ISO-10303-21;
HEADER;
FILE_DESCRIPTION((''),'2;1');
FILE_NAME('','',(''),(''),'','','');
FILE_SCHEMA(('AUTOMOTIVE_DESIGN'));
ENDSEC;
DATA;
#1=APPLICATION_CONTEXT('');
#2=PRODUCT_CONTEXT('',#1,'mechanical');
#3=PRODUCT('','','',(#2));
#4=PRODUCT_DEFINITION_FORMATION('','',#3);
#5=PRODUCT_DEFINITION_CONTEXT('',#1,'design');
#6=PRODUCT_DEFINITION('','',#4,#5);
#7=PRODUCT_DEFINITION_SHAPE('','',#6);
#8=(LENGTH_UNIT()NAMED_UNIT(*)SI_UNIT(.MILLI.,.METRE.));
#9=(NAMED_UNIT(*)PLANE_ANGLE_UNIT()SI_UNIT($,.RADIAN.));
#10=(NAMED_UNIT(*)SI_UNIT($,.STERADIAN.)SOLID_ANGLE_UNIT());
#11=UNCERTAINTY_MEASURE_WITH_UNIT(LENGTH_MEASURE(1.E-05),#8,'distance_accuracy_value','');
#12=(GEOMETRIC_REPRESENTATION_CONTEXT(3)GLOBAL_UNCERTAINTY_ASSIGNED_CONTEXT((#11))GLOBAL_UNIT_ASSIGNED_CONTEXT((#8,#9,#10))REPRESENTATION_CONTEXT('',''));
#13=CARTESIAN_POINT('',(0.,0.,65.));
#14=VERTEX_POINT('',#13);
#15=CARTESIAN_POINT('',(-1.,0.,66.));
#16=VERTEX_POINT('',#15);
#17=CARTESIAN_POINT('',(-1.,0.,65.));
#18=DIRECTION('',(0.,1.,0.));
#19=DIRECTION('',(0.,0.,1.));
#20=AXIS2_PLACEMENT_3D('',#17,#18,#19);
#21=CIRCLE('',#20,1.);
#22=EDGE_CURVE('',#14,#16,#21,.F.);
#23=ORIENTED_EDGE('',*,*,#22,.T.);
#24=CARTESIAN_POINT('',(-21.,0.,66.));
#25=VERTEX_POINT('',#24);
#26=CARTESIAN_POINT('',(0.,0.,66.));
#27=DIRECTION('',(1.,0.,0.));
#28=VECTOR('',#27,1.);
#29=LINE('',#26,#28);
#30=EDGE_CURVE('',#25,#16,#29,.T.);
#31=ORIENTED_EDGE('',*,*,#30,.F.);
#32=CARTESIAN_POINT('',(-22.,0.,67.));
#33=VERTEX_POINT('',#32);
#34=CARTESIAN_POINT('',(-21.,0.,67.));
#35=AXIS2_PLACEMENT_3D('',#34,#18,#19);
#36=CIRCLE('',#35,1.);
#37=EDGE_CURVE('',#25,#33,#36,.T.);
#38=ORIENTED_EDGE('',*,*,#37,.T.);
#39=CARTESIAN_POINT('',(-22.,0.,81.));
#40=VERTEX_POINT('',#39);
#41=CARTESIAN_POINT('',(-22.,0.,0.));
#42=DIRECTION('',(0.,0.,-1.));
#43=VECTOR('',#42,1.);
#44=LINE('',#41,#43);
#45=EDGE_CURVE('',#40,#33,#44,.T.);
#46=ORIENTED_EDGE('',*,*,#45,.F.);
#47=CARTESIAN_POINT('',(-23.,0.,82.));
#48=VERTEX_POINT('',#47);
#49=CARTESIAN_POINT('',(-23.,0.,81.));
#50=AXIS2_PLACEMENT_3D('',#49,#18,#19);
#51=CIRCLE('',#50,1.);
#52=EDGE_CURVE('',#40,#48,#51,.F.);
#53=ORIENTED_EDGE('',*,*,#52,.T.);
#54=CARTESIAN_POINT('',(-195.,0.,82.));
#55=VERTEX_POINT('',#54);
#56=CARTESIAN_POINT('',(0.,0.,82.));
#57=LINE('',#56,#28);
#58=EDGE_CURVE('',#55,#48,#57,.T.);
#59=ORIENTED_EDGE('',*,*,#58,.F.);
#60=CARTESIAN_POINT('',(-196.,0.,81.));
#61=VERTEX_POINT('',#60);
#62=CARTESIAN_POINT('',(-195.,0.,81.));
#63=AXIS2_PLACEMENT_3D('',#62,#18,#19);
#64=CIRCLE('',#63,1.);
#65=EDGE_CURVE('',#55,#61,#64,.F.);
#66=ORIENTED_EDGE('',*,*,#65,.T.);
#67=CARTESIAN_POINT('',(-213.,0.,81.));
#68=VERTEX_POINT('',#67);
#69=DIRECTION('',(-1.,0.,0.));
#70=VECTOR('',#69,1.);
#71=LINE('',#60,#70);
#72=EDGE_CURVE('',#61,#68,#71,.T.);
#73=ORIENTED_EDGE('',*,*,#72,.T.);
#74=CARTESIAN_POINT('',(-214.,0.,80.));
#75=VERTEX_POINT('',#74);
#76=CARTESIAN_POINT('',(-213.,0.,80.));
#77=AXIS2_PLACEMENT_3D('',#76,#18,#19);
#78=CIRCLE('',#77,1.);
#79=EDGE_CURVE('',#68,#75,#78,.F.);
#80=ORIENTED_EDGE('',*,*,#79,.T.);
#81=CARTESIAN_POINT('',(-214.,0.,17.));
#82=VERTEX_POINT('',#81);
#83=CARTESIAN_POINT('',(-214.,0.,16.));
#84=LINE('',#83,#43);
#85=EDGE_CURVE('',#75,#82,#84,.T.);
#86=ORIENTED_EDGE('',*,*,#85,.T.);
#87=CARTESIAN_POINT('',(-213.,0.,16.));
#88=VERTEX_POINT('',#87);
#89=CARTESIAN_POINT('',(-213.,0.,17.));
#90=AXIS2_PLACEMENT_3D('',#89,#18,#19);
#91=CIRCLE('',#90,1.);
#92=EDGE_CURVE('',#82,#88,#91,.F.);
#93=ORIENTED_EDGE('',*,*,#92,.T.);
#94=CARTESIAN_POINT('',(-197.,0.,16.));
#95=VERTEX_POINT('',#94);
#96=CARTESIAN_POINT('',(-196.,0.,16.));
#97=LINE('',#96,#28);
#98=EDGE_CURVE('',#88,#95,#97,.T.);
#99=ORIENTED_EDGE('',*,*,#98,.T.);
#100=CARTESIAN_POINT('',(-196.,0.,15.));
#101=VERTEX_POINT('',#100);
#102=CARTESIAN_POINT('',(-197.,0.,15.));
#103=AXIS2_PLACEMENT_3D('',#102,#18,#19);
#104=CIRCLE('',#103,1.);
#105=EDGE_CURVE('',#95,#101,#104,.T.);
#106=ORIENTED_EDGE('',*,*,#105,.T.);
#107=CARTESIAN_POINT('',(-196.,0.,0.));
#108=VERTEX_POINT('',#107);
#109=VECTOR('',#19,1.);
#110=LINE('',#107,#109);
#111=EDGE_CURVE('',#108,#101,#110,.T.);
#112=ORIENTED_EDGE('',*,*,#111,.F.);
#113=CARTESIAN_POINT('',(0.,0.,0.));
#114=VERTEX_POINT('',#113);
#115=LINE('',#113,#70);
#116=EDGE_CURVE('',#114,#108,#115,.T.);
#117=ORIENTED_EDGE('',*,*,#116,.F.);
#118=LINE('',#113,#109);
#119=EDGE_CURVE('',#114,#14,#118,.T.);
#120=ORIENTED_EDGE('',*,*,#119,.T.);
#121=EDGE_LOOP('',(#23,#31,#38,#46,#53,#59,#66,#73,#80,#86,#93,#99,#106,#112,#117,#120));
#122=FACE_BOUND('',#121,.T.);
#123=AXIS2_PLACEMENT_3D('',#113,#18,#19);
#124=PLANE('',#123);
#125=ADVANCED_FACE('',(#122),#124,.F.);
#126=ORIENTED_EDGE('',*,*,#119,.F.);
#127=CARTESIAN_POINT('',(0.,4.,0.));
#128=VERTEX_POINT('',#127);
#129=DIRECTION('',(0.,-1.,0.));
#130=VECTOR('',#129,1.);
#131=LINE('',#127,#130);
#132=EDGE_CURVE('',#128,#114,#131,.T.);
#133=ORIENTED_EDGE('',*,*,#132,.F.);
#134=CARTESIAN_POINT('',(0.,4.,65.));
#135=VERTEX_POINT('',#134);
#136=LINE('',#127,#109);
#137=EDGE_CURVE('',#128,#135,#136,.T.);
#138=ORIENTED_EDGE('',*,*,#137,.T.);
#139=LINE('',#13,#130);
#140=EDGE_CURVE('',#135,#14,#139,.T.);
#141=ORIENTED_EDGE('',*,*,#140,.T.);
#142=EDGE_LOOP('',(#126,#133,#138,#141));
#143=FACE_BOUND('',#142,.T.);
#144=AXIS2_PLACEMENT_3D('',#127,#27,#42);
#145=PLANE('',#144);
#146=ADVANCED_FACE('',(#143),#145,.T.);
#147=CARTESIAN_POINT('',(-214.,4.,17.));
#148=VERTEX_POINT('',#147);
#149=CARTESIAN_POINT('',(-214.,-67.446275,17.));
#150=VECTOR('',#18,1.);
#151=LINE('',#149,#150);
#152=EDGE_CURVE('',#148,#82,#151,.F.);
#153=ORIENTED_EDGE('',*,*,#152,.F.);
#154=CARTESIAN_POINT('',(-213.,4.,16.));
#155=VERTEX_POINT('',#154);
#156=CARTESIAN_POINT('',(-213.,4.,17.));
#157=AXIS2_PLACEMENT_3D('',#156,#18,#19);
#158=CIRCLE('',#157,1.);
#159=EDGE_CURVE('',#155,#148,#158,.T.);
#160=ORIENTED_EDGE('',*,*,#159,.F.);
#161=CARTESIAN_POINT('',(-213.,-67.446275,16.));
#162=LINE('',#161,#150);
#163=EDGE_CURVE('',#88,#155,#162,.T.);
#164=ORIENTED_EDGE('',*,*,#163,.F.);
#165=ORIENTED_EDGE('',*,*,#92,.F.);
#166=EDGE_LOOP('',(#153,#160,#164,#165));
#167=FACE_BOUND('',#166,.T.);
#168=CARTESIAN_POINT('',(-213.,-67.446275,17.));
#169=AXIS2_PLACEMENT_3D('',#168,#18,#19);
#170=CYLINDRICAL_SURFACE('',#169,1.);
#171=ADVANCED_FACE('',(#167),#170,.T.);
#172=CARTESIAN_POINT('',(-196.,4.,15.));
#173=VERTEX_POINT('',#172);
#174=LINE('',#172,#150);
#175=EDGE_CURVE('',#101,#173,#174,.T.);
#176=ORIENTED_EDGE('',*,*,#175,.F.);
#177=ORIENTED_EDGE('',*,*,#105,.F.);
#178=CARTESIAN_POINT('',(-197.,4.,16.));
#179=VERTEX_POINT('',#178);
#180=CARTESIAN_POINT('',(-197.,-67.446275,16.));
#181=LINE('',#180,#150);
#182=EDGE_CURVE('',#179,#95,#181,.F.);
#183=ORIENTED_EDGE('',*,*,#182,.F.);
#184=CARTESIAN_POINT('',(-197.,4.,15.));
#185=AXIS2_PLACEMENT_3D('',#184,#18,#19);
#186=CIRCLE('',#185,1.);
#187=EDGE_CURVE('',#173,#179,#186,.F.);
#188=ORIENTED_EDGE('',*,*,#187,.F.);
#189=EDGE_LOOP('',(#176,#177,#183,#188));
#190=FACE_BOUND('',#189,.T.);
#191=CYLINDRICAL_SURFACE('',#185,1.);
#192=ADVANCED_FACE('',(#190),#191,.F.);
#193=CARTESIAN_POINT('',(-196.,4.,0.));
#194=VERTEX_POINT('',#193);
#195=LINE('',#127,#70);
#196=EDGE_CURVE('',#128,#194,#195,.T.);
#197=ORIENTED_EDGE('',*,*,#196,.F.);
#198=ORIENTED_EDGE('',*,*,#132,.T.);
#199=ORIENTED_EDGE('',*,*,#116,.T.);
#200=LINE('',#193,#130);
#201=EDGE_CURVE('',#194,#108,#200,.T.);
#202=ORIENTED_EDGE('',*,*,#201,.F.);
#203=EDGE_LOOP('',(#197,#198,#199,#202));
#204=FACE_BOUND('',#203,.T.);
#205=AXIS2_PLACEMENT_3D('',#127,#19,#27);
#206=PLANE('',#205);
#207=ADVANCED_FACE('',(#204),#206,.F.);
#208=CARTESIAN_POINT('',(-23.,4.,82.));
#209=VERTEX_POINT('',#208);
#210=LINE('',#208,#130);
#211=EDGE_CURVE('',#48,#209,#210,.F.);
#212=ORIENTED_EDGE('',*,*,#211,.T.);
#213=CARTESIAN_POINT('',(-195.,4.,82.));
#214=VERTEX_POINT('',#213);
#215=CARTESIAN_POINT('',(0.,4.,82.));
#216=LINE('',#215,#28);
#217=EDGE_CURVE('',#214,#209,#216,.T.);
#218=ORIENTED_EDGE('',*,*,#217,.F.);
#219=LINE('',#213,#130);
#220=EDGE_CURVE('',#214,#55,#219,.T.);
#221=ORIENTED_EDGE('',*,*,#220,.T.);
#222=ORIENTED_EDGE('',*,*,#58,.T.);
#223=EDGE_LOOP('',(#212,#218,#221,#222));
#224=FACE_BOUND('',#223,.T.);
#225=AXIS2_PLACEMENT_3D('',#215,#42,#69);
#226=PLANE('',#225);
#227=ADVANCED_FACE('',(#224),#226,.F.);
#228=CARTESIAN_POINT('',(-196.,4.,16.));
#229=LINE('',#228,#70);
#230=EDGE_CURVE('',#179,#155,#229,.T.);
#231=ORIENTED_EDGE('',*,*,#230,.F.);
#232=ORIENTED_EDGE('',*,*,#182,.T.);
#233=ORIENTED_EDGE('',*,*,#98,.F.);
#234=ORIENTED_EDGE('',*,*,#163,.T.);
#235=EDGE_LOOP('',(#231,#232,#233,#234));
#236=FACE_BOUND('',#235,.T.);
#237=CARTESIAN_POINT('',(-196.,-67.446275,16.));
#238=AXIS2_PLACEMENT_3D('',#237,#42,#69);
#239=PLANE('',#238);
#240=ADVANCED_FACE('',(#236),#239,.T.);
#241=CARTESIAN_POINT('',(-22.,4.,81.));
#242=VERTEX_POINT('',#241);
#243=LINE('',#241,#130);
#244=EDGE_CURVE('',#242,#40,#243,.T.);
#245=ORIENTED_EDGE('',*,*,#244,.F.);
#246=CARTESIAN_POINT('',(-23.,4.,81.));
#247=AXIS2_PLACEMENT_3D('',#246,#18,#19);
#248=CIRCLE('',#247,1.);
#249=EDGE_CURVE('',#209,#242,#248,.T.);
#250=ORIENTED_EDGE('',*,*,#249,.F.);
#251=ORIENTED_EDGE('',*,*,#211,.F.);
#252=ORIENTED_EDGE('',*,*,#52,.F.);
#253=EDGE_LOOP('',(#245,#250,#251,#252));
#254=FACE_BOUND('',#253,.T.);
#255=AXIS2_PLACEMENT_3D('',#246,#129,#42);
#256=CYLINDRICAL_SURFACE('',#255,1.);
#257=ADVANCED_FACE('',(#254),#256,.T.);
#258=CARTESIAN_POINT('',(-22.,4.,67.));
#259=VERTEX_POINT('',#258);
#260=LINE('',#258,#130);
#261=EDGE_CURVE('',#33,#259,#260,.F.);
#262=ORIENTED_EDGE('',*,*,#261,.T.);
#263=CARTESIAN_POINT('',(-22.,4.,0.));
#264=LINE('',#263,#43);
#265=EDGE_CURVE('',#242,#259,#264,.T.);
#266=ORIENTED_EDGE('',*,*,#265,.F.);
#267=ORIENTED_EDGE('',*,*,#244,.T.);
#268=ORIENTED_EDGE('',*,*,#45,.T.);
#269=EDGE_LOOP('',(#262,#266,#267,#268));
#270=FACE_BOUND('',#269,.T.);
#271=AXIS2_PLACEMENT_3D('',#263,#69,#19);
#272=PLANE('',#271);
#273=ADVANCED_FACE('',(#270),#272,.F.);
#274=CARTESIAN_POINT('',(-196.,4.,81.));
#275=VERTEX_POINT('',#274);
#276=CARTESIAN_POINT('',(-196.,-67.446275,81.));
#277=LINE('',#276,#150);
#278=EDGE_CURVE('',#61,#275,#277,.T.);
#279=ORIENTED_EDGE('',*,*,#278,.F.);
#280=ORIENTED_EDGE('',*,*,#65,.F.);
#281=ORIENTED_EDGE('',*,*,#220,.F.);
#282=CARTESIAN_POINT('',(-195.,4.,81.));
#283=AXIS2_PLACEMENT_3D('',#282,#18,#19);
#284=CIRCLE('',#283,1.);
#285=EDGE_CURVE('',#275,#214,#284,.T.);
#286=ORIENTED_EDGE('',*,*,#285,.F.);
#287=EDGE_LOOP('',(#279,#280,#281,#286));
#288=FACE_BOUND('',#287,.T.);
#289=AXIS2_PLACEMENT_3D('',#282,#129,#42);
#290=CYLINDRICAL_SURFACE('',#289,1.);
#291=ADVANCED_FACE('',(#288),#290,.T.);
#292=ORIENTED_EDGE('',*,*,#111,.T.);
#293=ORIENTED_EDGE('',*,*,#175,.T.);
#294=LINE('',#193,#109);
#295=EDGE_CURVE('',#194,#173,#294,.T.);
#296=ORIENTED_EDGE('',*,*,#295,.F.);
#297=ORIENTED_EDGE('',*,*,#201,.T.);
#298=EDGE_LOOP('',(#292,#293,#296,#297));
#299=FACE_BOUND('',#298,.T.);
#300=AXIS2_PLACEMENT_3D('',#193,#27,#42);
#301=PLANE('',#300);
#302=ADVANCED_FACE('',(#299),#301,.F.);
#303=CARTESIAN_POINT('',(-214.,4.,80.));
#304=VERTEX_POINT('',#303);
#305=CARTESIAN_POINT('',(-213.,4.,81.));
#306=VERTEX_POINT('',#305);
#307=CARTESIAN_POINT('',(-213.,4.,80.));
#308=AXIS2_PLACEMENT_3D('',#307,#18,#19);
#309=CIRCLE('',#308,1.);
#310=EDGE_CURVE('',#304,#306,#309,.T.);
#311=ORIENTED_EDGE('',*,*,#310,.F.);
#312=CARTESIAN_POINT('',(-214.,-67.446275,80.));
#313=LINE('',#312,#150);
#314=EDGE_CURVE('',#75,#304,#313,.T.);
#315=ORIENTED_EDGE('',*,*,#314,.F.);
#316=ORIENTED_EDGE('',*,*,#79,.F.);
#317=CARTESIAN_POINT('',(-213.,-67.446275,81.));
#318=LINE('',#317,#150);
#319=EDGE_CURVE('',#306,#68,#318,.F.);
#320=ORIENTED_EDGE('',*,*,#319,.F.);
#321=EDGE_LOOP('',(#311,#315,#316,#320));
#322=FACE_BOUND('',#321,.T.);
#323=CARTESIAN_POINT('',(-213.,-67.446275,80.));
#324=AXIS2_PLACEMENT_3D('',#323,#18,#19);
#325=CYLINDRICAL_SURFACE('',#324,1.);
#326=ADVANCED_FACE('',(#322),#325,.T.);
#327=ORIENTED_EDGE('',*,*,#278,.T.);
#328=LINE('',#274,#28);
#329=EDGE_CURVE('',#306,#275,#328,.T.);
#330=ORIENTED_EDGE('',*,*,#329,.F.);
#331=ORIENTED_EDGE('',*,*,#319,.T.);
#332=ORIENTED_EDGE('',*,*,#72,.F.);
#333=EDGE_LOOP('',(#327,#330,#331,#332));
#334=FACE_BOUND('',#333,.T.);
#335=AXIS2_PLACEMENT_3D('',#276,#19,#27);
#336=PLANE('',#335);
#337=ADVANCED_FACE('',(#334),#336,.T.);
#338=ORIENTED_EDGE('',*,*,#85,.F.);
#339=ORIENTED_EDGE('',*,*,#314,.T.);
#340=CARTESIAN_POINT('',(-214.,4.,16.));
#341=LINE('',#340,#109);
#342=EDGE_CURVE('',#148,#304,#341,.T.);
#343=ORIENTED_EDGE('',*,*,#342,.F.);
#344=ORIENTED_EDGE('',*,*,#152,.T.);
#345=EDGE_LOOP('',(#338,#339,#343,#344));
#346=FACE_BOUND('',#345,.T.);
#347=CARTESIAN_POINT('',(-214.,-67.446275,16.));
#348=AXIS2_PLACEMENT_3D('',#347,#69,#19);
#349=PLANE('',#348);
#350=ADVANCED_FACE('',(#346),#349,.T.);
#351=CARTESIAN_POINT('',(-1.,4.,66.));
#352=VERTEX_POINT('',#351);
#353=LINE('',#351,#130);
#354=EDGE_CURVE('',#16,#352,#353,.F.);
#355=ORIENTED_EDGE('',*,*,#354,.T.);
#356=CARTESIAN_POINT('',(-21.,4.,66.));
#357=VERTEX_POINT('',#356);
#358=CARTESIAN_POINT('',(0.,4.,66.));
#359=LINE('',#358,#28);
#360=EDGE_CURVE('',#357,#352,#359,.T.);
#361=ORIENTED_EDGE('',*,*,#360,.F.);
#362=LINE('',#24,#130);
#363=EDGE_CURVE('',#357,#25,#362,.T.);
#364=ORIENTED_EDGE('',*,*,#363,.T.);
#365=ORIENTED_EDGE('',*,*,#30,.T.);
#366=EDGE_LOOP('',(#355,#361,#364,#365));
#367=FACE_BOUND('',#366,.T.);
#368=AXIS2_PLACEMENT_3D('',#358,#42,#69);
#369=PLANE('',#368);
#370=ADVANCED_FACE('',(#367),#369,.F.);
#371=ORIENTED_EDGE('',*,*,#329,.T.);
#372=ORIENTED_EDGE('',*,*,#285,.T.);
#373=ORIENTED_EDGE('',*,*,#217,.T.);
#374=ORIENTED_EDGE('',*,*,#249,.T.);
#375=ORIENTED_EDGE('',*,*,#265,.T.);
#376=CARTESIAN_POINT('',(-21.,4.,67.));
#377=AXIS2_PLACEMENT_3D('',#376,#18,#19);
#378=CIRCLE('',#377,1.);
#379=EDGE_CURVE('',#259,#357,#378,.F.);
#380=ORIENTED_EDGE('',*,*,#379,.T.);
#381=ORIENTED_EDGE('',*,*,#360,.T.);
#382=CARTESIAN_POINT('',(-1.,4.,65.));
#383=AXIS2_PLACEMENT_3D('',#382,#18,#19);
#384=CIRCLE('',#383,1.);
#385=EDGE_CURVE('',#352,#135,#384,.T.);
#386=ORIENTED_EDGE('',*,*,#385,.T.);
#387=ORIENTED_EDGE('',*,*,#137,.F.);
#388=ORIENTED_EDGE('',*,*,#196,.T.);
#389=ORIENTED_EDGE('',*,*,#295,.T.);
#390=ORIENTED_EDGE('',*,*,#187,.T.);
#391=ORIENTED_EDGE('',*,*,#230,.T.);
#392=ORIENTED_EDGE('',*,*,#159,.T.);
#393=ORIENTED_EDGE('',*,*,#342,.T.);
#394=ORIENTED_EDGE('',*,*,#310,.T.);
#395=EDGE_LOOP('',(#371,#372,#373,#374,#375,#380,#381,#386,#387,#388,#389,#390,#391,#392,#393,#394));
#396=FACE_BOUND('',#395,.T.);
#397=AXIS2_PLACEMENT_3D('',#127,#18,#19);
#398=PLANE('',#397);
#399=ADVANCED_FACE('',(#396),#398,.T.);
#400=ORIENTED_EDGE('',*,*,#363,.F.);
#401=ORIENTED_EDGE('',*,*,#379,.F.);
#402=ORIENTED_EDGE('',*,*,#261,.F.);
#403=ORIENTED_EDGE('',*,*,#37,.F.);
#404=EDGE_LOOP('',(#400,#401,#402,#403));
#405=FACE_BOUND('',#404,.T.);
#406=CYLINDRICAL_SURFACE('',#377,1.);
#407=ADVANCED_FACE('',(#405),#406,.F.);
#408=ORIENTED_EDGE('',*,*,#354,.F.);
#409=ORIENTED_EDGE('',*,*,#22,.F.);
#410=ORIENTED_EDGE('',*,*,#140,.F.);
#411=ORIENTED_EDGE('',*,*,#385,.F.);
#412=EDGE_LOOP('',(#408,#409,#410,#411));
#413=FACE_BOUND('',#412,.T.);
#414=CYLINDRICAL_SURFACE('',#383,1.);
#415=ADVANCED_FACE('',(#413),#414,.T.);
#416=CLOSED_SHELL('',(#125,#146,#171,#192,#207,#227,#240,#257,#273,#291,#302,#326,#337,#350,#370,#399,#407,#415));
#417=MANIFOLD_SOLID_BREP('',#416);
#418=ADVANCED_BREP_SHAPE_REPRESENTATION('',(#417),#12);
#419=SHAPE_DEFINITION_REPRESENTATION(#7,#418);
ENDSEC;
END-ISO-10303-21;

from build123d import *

# Parameters (mm, degrees)
EXTRUDE_1_DEPTH = 4
SKETCH_2_W      = 18
SKETCH_2_H      = 65
EXTRUDE_2_DEPTH = 4
FILLET_1_R      = 1


with BuildPart() as part:
    # 草图1 → 凸台-拉伸1 (new body)
    with BuildSketch(Plane(origin=(0, 0, 0), x_dir=(1, 0, 0), z_dir=(0, 1, 0))):
        Polygon((0, -66), (0, 0), (-196, 0), (-196, -82), (-22, -82), (-22, -66), align=None)
    extrude(amount=EXTRUDE_1_DEPTH)

    # 草图2 → 凸台-拉伸2 (add)
    with BuildSketch(Plane(origin=(0, 4, 0), x_dir=(1, 0, 0), z_dir=(0, 1, 0))):
        with Locations((-205, -48.5)):
            Rectangle(SKETCH_2_W, SKETCH_2_H)
    extrude(amount=-EXTRUDE_2_DEPTH)

    # 圆角1
    fillet_1_edges = [part.edges().sort_by_distance(p)[0] for p in [
        (-22, 2, 82),
        (-196, 2, 82),
        (0, 2, 66),
        (-22, 2, 66),
        (-196, 2, 16),
        (-214, 2, 81),
        (-214, 2, 16),
    ]]
    fillet(fillet_1_edges, radius=FILLET_1_R - 0.0001)  # a hair under: the kernel refuses the full size


solid = part.part
